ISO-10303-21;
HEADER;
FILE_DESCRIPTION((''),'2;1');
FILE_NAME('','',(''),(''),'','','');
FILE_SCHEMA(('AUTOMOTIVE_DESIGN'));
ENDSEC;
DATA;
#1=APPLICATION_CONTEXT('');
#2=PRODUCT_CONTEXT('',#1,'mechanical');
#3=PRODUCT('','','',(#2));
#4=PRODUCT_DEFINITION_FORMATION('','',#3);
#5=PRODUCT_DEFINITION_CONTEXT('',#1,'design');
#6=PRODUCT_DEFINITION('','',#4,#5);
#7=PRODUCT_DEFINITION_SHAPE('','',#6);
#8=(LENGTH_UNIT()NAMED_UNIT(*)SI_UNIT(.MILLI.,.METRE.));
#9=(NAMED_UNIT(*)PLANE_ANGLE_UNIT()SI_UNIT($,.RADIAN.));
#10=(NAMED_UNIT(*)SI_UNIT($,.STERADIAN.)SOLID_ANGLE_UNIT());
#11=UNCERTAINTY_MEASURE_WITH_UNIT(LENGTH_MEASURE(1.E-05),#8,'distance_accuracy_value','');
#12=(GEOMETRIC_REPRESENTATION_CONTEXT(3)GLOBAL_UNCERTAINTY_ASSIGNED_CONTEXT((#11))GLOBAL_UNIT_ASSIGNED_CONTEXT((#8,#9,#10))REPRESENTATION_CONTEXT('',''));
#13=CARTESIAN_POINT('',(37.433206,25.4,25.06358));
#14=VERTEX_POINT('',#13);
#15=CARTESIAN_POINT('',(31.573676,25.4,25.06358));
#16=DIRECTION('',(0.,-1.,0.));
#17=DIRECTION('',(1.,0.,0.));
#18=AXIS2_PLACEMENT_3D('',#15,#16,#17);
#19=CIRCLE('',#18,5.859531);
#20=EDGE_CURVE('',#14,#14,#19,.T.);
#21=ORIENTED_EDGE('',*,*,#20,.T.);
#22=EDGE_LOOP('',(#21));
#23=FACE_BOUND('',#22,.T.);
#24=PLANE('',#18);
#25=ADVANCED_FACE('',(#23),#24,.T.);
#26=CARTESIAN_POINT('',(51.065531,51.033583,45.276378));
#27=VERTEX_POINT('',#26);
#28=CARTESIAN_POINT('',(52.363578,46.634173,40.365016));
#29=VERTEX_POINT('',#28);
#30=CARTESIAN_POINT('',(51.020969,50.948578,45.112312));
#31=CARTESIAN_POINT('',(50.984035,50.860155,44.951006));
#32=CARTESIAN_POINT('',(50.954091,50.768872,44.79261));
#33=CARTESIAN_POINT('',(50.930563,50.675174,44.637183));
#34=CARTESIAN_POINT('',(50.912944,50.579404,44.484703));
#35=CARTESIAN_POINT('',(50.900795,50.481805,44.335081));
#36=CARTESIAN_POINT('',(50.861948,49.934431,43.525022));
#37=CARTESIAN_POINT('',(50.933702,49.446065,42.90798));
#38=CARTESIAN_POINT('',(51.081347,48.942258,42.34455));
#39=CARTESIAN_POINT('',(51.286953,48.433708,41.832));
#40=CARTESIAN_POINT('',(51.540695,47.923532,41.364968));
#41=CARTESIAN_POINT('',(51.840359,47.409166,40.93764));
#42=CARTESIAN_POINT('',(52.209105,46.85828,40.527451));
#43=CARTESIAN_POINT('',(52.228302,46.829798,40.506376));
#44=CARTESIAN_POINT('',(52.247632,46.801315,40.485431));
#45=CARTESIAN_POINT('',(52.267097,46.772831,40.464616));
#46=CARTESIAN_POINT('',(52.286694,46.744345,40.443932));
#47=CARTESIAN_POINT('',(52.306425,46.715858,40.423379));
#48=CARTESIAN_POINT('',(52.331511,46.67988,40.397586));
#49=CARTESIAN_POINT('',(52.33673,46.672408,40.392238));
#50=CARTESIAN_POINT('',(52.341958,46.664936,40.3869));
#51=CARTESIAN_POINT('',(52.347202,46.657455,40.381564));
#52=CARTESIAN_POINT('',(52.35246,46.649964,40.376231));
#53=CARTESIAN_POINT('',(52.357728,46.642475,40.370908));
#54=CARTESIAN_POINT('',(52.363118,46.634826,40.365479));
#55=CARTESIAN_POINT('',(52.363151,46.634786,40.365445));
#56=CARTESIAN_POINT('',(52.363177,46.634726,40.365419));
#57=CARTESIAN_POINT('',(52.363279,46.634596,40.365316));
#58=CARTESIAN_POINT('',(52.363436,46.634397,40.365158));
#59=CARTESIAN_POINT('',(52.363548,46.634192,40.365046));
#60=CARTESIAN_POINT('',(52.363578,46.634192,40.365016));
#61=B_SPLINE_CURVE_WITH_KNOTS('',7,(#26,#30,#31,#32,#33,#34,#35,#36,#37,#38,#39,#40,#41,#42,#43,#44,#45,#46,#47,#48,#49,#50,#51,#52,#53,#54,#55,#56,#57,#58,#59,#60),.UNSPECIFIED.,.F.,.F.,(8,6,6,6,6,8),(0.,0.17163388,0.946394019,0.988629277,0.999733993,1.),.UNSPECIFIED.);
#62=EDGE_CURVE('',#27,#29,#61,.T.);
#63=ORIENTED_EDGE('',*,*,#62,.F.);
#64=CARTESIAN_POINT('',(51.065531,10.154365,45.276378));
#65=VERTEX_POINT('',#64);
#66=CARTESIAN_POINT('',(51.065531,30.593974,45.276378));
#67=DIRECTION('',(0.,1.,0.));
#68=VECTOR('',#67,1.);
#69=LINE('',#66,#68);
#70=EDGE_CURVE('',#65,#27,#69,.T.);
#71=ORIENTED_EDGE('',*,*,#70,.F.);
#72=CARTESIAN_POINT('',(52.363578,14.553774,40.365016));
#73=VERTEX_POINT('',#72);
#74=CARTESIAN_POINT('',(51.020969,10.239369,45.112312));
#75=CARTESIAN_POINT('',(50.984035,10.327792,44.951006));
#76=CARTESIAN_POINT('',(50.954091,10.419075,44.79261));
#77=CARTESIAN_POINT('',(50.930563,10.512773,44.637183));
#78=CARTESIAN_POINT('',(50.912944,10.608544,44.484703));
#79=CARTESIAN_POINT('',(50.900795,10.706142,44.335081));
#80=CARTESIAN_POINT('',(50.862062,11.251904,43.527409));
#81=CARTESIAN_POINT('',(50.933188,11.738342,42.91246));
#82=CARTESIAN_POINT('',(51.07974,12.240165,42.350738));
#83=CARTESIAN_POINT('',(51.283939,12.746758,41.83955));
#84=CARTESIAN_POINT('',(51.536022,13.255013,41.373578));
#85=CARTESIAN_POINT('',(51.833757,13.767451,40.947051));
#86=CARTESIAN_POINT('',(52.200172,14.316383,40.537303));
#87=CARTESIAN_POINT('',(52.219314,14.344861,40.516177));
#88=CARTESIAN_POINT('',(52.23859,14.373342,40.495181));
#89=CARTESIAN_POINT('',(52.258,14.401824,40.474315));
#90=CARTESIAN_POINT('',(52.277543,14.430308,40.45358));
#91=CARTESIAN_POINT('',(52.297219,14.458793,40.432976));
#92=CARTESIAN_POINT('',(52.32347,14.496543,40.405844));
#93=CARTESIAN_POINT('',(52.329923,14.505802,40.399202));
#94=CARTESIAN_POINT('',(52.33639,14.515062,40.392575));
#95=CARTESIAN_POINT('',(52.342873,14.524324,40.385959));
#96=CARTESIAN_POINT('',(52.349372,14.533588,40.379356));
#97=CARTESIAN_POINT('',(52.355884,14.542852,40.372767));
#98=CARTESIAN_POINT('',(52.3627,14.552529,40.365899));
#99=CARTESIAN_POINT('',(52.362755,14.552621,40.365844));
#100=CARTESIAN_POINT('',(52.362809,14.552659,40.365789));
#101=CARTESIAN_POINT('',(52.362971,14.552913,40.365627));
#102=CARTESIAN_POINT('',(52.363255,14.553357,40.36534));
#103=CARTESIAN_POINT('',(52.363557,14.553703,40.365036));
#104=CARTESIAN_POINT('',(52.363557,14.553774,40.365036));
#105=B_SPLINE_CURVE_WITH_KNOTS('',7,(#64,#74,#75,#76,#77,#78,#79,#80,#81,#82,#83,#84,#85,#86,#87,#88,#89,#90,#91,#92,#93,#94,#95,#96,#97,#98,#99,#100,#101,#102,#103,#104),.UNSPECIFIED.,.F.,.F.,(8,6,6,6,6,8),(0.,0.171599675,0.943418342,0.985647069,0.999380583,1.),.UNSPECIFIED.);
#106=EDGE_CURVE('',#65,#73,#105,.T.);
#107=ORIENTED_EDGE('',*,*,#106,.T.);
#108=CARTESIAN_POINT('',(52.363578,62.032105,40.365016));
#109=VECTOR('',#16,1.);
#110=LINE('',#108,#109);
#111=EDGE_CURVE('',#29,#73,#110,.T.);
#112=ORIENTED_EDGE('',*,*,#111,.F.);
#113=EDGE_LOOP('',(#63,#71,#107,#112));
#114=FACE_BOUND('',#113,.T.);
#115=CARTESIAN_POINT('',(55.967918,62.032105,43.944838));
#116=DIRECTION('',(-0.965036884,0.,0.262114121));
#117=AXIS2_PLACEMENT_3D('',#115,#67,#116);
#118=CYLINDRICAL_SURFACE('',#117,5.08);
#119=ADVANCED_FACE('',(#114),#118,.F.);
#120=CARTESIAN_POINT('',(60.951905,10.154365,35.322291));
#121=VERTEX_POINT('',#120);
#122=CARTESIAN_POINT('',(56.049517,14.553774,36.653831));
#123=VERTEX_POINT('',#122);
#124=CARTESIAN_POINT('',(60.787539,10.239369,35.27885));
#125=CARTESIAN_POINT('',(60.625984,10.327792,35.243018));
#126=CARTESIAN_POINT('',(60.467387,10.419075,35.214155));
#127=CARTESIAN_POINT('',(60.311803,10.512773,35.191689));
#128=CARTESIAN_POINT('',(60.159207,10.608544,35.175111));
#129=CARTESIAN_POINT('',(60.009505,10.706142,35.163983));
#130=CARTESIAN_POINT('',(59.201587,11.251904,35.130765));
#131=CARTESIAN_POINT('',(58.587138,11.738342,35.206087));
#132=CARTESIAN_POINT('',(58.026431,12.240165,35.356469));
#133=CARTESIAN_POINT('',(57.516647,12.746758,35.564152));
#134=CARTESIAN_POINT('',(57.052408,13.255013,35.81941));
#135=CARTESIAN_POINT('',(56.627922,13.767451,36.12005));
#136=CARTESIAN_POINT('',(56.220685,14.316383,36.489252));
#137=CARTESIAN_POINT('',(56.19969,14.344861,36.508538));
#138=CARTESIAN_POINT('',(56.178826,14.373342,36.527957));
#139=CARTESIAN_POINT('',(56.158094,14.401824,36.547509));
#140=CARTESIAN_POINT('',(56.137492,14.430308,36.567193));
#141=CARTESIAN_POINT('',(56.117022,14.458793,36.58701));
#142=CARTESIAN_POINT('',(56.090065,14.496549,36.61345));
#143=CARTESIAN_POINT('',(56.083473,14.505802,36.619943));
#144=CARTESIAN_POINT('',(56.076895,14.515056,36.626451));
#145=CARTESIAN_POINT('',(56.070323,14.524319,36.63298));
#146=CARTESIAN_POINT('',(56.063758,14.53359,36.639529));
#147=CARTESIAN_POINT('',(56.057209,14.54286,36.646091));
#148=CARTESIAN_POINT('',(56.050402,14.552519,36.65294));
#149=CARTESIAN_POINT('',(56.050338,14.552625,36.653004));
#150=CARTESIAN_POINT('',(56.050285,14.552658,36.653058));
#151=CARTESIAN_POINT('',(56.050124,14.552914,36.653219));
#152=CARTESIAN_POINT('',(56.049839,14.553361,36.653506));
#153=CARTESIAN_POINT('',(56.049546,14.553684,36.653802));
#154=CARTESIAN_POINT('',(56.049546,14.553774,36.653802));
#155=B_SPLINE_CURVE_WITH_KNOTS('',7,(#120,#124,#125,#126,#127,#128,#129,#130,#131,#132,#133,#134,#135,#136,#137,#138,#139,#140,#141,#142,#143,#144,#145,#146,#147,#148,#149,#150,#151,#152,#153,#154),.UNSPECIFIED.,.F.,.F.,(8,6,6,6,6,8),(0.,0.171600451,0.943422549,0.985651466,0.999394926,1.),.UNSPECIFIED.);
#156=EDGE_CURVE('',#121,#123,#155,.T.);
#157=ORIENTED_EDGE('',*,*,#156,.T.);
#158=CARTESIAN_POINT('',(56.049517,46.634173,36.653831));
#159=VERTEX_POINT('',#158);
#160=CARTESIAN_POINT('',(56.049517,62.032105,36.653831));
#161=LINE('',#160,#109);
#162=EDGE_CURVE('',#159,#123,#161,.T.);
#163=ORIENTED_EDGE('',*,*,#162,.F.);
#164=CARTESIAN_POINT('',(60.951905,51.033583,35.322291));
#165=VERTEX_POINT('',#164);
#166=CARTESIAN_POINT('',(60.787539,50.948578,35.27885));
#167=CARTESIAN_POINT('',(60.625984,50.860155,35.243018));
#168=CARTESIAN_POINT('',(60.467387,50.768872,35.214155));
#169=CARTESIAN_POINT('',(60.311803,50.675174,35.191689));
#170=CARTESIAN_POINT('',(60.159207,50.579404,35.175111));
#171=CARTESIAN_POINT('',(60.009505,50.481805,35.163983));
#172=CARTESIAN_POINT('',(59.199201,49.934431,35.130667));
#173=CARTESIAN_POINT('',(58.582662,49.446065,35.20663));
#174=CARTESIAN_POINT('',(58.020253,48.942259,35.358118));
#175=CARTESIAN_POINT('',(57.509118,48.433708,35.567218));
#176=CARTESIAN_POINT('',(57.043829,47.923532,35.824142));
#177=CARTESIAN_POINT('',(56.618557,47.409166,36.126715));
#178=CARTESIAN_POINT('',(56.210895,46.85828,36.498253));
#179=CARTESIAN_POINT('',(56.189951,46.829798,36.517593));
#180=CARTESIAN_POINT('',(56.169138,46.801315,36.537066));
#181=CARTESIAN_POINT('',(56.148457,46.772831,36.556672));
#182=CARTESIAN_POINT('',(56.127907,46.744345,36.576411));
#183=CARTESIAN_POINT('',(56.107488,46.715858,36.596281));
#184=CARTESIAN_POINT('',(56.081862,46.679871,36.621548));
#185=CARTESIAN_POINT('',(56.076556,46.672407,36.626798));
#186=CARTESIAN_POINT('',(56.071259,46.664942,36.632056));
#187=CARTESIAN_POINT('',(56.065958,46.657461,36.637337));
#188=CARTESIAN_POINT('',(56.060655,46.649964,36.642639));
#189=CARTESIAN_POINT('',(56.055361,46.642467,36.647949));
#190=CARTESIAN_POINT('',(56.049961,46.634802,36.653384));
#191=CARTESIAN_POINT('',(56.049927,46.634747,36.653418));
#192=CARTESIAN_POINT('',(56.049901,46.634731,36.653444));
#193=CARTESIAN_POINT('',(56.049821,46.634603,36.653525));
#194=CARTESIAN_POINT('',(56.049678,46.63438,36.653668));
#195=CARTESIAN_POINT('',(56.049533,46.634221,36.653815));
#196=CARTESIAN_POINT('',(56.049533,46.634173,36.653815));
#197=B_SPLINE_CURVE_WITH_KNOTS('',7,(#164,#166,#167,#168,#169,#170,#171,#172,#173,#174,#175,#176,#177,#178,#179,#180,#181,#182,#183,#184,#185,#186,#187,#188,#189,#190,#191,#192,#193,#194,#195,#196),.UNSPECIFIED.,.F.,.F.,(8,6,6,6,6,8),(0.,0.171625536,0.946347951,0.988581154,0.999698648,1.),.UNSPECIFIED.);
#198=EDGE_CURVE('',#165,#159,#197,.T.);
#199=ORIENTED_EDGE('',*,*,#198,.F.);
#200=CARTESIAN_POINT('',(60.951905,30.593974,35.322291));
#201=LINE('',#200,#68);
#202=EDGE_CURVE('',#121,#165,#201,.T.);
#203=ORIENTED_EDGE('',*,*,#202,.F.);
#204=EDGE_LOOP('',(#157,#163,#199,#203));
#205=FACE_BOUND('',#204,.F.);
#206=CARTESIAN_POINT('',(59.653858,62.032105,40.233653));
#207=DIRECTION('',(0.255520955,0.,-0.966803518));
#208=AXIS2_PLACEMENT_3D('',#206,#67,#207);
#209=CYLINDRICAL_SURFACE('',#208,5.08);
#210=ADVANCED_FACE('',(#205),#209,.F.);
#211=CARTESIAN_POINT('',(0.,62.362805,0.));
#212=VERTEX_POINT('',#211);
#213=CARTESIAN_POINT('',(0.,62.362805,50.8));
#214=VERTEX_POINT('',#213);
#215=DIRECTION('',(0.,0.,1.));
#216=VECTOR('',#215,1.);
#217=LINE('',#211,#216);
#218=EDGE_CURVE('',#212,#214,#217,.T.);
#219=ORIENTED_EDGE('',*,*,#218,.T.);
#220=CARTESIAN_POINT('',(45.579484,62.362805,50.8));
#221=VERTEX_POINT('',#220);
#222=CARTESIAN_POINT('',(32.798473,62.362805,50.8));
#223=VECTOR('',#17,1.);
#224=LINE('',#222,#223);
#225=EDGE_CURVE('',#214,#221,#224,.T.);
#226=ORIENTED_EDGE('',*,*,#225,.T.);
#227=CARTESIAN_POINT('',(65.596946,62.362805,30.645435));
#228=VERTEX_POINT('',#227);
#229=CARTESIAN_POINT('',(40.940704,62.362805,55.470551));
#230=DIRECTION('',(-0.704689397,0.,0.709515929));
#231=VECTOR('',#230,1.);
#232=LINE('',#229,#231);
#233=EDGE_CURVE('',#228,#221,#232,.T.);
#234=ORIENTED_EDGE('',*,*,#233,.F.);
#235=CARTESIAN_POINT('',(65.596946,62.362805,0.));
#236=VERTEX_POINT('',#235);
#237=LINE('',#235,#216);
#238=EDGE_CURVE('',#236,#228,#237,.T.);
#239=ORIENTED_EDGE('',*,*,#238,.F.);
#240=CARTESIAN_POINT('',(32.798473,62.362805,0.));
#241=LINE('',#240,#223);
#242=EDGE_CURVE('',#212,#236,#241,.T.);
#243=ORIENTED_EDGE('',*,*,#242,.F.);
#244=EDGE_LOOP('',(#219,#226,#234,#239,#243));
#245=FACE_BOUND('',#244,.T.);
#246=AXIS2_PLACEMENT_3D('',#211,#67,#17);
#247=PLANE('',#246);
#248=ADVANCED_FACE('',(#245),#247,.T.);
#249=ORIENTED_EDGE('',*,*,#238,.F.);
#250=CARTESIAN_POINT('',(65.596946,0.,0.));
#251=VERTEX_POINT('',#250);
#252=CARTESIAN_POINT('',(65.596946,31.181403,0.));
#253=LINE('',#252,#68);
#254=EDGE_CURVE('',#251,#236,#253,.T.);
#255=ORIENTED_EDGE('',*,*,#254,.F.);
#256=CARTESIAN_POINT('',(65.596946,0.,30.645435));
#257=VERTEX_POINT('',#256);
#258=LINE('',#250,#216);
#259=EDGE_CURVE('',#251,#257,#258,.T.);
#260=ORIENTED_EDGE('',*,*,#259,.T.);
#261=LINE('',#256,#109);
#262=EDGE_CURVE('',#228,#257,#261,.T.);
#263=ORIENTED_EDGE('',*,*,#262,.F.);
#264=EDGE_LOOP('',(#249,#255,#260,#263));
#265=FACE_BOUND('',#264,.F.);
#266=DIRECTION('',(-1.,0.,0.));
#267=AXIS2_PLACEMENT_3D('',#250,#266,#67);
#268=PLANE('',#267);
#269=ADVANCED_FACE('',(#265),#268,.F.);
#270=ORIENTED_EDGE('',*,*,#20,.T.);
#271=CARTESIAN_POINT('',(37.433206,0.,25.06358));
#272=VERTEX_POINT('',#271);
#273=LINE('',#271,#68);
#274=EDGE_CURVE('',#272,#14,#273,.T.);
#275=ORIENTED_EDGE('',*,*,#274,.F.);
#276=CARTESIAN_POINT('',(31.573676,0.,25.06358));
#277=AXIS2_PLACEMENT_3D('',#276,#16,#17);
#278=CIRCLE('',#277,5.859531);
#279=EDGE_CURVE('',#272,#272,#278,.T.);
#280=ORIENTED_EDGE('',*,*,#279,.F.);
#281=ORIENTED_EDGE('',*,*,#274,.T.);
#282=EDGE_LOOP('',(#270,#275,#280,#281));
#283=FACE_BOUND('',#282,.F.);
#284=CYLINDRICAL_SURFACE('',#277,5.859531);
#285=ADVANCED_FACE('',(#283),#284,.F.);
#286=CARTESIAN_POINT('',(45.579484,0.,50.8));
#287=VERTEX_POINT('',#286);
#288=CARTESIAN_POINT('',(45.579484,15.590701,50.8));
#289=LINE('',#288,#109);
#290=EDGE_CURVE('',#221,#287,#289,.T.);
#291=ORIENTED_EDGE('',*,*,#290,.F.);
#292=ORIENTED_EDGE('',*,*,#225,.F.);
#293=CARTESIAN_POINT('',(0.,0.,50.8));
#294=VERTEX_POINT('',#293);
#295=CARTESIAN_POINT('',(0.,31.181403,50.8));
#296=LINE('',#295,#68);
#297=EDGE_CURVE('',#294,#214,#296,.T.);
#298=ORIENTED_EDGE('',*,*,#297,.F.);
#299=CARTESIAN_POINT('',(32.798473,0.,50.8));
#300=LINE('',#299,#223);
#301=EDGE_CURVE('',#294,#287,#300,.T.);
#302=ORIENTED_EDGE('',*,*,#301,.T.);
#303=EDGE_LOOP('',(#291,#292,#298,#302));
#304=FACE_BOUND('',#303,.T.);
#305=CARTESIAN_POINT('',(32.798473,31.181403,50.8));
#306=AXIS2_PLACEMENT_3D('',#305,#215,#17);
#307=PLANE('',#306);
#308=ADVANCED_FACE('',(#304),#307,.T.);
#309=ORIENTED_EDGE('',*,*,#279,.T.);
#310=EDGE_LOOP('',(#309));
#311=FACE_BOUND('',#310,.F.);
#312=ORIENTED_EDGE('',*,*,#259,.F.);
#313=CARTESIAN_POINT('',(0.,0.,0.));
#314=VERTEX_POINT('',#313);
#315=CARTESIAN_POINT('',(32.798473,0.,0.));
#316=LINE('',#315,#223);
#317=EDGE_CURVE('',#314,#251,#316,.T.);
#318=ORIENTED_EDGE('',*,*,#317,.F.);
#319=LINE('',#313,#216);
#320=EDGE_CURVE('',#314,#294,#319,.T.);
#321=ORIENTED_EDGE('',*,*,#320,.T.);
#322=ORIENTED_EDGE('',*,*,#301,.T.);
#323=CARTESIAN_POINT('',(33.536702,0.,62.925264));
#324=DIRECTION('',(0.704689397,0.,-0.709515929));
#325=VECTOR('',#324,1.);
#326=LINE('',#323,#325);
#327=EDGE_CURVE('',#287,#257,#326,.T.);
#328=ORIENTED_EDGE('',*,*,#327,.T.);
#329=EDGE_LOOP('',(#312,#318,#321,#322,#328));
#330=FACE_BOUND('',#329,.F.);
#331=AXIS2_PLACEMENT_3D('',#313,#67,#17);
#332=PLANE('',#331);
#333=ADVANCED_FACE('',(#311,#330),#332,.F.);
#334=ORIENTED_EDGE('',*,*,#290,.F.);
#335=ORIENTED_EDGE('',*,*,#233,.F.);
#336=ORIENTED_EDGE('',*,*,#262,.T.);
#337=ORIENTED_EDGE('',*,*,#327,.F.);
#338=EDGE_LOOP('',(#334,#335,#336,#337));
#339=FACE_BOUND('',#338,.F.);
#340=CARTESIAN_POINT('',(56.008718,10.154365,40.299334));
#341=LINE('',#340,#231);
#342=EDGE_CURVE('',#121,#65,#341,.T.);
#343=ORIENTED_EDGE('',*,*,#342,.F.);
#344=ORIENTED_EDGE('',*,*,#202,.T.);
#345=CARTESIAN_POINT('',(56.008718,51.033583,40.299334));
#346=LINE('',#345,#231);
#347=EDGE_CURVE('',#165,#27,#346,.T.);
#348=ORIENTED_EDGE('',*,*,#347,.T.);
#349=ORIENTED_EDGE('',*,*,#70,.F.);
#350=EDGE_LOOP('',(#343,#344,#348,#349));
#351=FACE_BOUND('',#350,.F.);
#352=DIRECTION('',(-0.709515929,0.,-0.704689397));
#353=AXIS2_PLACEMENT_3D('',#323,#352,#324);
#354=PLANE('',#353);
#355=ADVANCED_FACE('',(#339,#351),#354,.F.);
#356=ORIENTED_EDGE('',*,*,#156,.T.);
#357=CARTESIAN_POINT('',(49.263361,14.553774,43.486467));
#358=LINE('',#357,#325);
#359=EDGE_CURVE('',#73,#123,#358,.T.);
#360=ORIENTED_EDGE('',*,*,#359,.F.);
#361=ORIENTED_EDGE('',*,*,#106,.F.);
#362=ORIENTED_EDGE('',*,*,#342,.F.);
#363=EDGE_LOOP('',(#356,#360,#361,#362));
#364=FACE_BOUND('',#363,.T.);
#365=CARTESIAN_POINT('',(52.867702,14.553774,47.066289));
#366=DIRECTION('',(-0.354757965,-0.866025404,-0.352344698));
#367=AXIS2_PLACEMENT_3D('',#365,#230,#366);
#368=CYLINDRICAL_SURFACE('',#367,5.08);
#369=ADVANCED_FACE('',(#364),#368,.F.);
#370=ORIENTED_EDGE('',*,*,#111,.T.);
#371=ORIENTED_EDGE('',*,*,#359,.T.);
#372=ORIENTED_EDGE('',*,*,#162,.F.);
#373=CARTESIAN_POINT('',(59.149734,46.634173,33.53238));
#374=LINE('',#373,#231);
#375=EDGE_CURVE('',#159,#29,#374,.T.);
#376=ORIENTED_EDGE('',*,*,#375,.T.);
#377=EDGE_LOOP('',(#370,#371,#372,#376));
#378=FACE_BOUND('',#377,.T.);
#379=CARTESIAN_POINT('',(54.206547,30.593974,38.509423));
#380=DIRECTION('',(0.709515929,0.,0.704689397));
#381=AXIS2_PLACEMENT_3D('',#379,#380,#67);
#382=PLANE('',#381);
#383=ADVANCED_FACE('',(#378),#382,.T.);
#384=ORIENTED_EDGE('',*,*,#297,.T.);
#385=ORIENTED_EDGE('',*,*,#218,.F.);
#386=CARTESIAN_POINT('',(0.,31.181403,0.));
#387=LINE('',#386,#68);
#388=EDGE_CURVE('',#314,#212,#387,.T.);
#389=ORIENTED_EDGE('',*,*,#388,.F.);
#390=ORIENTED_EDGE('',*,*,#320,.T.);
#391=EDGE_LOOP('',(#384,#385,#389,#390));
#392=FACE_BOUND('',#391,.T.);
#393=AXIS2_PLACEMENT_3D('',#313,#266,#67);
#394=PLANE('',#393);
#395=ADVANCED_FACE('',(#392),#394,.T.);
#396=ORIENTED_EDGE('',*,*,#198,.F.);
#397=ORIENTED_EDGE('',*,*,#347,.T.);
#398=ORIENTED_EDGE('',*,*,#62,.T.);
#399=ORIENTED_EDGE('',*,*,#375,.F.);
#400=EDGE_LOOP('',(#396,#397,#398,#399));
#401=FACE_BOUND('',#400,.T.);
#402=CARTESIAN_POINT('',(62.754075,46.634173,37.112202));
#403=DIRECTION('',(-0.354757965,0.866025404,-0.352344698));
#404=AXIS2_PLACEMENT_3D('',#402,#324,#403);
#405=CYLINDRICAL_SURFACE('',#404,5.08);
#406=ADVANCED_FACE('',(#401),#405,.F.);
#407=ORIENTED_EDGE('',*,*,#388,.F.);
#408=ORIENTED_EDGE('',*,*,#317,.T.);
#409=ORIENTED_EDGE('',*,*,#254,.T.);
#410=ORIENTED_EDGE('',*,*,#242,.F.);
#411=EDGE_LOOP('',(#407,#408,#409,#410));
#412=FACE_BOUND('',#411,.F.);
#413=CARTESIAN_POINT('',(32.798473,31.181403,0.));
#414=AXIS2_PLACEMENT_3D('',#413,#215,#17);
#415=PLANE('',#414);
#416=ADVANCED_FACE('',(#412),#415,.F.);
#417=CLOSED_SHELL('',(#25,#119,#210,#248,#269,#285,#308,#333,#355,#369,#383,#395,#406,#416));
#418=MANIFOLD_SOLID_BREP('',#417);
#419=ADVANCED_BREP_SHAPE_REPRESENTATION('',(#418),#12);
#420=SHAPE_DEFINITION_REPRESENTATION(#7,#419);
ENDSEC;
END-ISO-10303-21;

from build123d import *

# Parameters (mm, degrees)
F0_W        = 65.5969455838
F0_H        = 62.3628050089
F1_DEPTH    = 50.8
F3_DEPTH    = 101.6
F4_W        = 40.8792179078
F4_H        = 14.0294057783
F5_DEPTH    = 2.54
F6_R        = 5.8595306003
F7_DEPTH    = 25.4
F8_T1_DEPTH = 51.8777405358
F8_T3_DEPTH = 14.0294057783
F8_T5_DEPTH = 14.0294057783


# Not quite as in the source:
# - a fillet or chamfer that OpenCascade refuses, or shapes differently, is made with other operations: its cross-section is extruded or revolved along the edge and cut away or added


with BuildPart() as f1:
    # F0 (on Top) → F1 (new body)
    with BuildSketch(Plane.XY):
        with Locations((32.7984727919, 31.1814025044)):
            Rectangle(F0_W, F0_H)
    extrude(amount=F1_DEPTH)

    # F2 (on face) → F3 (cut)
    with BuildSketch(Plane.XZ):
        Polygon((89.7827520967, 45.4889908433), (33.5367023945, 62.9252642393), (74.5963230729, 21.5844195336), align=None)
    extrude(amount=-F3_DEPTH, mode=Mode.SUBTRACT)

    # F4 (on face) → F5 (cut)
    with BuildSketch(Plane(origin=(48.3447062482, 0, 48.0158379562), x_dir=(0, 1, 0), z_dir=(0.7095159293, 0, 0.7046893969))):
        with Locations((30.5939735845, -10.8757299604)):
            Rectangle(F4_W, F4_H)
    extrude(amount=-F5_DEPTH, mode=Mode.SUBTRACT)

    # F6 (on face) → F7 (cut)
    with BuildSketch(Plane.XZ):
        with Locations((31.5736755729, 25.0635799021)):
            Circle(F6_R)
    extrude(amount=-F7_DEPTH, mode=Mode.SUBTRACT)

    # F8: fillet of radius 5.08 on 4 edges, made by hand

    # F8_s2 → F8_t1 (join)
    with BuildSketch(Plane.XZ.offset(-62.0321051664)):
        with BuildLine():
            ThreePointArc((51.0655310864, 45.2763777457), (51.0565565883, 42.6467915619), (52.3635775369, 40.3650158763))
            Line((52.3635775369, 40.3650158763), (49.263360626, 43.4864666776))
            Line((49.263360626, 43.4864666776), (51.0655310864, 45.2763777457))
        make_face()
        with BuildLine():
            ThreePointArc((60.9519045829, 35.3222908675), (58.3223183991, 35.3312653655), (56.0495172115, 36.6538306007))
            Line((56.0495172115, 36.6538306007), (59.1497341225, 33.5323797994))
            Line((59.1497341225, 33.5323797994), (60.9519045829, 35.3222908675))
        make_face()
    extrude(amount=F8_T1_DEPTH)

    # F8_s4 → F8_t3 (join)
    with BuildSketch(Plane(origin=(12.6071983347, 0, -12.6935470887), x_dir=(0, 1, 0), z_dir=(-0.7046893969, 0, 0.7095159293))):
        with BuildLine():
            ThreePointArc((51.0335825384, -68.1375910703), (49.1741734871, -66.278182019), (46.6341734871, -65.5975910703))
            Line((46.6341734871, -65.5975910703), (51.0335825384, -65.5975910703))
            Line((51.0335825384, -65.5975910703), (51.0335825384, -68.1375910703))
        make_face()
    extrude(amount=F8_T3_DEPTH)

    # F8_s6 → F8_t5 (join)
    with BuildSketch(Plane(origin=(2.7208248382, 0, -2.7394602105), x_dir=(0, 1, 0), z_dir=(0.7046893969, 0, -0.7095159293))):
        with BuildLine():
            ThreePointArc((10.1543646306, 68.1375910703), (12.0137736818, 66.278182019), (14.5537736818, 65.5975910703))
            Line((14.5537736818, 65.5975910703), (10.1543646306, 65.5975910703))
            Line((10.1543646306, 65.5975910703), (10.1543646306, 68.1375910703))
        make_face()
    extrude(amount=F8_T5_DEPTH)


solid = f1.part
